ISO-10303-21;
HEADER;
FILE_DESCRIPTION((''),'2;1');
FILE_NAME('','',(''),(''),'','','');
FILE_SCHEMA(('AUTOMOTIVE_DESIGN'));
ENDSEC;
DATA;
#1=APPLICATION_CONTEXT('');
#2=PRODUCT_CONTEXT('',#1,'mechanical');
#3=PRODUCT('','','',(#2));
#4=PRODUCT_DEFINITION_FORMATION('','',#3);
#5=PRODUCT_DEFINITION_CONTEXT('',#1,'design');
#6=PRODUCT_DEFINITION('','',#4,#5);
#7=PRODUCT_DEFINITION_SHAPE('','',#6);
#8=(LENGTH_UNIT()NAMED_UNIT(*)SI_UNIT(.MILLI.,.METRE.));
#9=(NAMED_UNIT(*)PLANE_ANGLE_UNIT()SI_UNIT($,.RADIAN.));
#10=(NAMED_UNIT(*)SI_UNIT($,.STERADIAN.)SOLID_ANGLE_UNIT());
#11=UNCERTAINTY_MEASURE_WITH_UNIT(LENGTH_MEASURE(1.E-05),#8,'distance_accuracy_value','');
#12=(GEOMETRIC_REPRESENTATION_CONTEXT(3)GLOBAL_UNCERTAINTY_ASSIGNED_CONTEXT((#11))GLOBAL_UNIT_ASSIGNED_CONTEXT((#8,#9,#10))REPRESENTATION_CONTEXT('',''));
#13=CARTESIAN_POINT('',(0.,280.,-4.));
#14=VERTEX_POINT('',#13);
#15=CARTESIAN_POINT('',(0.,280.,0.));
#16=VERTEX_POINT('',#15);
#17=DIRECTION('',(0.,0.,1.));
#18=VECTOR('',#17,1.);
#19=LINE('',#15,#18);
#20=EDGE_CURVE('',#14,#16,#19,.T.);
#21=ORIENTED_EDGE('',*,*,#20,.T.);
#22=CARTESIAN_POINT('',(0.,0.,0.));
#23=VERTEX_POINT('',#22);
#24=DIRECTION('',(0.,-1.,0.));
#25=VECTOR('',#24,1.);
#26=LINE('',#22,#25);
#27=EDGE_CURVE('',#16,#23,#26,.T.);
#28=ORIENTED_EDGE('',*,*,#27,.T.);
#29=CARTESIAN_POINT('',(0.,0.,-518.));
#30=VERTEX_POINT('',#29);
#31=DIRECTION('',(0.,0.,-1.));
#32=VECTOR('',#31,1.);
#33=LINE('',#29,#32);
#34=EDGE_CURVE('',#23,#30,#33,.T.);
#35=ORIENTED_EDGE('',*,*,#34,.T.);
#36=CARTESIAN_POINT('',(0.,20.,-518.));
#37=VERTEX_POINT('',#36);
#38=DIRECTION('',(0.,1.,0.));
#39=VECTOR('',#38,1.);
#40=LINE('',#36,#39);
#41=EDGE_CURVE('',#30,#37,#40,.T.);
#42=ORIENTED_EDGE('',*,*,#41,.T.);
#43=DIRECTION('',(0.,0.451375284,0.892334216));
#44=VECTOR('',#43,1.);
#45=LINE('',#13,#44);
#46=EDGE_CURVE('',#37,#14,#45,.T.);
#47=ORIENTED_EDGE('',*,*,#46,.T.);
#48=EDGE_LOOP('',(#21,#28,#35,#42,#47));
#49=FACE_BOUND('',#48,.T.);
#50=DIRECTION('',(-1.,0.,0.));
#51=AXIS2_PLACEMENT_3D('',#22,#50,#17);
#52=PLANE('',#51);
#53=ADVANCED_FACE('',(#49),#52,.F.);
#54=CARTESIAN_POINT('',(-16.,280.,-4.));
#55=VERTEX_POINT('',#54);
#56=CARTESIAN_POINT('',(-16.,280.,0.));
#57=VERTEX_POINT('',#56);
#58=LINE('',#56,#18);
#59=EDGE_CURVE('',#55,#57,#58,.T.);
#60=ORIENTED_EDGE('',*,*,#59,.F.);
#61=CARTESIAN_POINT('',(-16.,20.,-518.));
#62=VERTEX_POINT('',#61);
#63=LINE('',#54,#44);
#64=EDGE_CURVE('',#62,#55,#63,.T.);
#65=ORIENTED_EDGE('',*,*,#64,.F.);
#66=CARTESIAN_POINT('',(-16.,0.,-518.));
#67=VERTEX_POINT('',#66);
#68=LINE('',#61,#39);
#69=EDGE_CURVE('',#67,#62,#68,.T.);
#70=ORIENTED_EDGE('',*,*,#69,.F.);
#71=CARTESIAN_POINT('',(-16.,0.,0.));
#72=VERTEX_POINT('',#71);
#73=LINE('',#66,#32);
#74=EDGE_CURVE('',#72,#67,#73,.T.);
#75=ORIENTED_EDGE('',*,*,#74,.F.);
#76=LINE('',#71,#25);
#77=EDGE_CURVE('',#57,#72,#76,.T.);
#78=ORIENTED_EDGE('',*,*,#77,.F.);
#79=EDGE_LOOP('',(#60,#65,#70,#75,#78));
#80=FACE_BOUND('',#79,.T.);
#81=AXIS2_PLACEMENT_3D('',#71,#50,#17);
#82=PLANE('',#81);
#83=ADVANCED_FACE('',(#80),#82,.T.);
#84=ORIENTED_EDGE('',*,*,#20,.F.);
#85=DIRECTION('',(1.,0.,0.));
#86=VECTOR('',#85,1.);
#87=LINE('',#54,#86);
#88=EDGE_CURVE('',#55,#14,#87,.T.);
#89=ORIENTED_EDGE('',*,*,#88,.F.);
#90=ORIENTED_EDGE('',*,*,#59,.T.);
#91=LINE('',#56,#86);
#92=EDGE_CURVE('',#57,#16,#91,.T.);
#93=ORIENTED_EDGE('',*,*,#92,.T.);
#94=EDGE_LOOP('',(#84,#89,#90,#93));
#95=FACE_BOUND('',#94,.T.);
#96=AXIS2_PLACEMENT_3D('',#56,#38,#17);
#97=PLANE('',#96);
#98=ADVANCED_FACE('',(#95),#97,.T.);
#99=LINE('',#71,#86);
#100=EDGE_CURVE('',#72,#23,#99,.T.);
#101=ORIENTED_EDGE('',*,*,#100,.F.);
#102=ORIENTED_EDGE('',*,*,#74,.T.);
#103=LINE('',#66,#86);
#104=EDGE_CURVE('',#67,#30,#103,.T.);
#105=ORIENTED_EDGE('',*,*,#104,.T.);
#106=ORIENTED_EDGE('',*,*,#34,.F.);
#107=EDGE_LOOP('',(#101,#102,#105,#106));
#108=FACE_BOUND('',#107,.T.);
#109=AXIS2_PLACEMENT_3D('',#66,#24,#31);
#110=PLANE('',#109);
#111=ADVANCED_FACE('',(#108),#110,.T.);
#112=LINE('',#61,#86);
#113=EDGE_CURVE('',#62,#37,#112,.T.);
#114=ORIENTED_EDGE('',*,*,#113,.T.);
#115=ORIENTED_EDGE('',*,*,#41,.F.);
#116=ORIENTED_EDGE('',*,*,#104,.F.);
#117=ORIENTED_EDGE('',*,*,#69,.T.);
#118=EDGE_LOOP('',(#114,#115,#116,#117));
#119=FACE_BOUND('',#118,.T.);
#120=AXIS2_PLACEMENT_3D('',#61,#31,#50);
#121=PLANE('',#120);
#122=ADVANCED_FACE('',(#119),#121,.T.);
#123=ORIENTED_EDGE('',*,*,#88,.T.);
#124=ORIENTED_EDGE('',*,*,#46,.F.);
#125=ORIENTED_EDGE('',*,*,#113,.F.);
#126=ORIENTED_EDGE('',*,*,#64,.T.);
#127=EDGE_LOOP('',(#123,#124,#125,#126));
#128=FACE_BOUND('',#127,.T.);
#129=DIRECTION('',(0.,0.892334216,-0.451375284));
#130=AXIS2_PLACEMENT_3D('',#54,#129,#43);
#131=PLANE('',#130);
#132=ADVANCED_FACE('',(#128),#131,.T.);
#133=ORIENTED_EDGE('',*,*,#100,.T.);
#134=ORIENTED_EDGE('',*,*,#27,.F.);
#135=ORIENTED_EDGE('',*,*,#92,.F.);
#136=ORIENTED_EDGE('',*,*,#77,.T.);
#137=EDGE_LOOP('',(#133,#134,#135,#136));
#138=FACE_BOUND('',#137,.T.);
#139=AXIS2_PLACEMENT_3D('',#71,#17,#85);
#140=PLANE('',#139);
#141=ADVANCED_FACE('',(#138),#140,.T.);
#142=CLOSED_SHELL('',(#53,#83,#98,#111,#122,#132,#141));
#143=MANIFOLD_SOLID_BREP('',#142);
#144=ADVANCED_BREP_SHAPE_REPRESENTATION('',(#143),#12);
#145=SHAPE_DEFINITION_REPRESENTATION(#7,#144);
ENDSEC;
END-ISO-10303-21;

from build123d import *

# Parameters (mm, degrees)
SM_BASE_FLANGE_1_DEPTH = 16


# Sheet-metal steps are written as plain solids
with BuildPart() as part:
    # Sketch 1 → 基体-法兰1 (new body)
    with BuildSketch(Plane(origin=(0, 0, 0), x_dir=(0, 0, -1), z_dir=(1, 0, 0))):
        Polygon((0, 0), (0, 280), (4, 280), (518, 20), (518, 0), align=None)
    extrude(amount=-SM_BASE_FLANGE_1_DEPTH)


solid = part.part
